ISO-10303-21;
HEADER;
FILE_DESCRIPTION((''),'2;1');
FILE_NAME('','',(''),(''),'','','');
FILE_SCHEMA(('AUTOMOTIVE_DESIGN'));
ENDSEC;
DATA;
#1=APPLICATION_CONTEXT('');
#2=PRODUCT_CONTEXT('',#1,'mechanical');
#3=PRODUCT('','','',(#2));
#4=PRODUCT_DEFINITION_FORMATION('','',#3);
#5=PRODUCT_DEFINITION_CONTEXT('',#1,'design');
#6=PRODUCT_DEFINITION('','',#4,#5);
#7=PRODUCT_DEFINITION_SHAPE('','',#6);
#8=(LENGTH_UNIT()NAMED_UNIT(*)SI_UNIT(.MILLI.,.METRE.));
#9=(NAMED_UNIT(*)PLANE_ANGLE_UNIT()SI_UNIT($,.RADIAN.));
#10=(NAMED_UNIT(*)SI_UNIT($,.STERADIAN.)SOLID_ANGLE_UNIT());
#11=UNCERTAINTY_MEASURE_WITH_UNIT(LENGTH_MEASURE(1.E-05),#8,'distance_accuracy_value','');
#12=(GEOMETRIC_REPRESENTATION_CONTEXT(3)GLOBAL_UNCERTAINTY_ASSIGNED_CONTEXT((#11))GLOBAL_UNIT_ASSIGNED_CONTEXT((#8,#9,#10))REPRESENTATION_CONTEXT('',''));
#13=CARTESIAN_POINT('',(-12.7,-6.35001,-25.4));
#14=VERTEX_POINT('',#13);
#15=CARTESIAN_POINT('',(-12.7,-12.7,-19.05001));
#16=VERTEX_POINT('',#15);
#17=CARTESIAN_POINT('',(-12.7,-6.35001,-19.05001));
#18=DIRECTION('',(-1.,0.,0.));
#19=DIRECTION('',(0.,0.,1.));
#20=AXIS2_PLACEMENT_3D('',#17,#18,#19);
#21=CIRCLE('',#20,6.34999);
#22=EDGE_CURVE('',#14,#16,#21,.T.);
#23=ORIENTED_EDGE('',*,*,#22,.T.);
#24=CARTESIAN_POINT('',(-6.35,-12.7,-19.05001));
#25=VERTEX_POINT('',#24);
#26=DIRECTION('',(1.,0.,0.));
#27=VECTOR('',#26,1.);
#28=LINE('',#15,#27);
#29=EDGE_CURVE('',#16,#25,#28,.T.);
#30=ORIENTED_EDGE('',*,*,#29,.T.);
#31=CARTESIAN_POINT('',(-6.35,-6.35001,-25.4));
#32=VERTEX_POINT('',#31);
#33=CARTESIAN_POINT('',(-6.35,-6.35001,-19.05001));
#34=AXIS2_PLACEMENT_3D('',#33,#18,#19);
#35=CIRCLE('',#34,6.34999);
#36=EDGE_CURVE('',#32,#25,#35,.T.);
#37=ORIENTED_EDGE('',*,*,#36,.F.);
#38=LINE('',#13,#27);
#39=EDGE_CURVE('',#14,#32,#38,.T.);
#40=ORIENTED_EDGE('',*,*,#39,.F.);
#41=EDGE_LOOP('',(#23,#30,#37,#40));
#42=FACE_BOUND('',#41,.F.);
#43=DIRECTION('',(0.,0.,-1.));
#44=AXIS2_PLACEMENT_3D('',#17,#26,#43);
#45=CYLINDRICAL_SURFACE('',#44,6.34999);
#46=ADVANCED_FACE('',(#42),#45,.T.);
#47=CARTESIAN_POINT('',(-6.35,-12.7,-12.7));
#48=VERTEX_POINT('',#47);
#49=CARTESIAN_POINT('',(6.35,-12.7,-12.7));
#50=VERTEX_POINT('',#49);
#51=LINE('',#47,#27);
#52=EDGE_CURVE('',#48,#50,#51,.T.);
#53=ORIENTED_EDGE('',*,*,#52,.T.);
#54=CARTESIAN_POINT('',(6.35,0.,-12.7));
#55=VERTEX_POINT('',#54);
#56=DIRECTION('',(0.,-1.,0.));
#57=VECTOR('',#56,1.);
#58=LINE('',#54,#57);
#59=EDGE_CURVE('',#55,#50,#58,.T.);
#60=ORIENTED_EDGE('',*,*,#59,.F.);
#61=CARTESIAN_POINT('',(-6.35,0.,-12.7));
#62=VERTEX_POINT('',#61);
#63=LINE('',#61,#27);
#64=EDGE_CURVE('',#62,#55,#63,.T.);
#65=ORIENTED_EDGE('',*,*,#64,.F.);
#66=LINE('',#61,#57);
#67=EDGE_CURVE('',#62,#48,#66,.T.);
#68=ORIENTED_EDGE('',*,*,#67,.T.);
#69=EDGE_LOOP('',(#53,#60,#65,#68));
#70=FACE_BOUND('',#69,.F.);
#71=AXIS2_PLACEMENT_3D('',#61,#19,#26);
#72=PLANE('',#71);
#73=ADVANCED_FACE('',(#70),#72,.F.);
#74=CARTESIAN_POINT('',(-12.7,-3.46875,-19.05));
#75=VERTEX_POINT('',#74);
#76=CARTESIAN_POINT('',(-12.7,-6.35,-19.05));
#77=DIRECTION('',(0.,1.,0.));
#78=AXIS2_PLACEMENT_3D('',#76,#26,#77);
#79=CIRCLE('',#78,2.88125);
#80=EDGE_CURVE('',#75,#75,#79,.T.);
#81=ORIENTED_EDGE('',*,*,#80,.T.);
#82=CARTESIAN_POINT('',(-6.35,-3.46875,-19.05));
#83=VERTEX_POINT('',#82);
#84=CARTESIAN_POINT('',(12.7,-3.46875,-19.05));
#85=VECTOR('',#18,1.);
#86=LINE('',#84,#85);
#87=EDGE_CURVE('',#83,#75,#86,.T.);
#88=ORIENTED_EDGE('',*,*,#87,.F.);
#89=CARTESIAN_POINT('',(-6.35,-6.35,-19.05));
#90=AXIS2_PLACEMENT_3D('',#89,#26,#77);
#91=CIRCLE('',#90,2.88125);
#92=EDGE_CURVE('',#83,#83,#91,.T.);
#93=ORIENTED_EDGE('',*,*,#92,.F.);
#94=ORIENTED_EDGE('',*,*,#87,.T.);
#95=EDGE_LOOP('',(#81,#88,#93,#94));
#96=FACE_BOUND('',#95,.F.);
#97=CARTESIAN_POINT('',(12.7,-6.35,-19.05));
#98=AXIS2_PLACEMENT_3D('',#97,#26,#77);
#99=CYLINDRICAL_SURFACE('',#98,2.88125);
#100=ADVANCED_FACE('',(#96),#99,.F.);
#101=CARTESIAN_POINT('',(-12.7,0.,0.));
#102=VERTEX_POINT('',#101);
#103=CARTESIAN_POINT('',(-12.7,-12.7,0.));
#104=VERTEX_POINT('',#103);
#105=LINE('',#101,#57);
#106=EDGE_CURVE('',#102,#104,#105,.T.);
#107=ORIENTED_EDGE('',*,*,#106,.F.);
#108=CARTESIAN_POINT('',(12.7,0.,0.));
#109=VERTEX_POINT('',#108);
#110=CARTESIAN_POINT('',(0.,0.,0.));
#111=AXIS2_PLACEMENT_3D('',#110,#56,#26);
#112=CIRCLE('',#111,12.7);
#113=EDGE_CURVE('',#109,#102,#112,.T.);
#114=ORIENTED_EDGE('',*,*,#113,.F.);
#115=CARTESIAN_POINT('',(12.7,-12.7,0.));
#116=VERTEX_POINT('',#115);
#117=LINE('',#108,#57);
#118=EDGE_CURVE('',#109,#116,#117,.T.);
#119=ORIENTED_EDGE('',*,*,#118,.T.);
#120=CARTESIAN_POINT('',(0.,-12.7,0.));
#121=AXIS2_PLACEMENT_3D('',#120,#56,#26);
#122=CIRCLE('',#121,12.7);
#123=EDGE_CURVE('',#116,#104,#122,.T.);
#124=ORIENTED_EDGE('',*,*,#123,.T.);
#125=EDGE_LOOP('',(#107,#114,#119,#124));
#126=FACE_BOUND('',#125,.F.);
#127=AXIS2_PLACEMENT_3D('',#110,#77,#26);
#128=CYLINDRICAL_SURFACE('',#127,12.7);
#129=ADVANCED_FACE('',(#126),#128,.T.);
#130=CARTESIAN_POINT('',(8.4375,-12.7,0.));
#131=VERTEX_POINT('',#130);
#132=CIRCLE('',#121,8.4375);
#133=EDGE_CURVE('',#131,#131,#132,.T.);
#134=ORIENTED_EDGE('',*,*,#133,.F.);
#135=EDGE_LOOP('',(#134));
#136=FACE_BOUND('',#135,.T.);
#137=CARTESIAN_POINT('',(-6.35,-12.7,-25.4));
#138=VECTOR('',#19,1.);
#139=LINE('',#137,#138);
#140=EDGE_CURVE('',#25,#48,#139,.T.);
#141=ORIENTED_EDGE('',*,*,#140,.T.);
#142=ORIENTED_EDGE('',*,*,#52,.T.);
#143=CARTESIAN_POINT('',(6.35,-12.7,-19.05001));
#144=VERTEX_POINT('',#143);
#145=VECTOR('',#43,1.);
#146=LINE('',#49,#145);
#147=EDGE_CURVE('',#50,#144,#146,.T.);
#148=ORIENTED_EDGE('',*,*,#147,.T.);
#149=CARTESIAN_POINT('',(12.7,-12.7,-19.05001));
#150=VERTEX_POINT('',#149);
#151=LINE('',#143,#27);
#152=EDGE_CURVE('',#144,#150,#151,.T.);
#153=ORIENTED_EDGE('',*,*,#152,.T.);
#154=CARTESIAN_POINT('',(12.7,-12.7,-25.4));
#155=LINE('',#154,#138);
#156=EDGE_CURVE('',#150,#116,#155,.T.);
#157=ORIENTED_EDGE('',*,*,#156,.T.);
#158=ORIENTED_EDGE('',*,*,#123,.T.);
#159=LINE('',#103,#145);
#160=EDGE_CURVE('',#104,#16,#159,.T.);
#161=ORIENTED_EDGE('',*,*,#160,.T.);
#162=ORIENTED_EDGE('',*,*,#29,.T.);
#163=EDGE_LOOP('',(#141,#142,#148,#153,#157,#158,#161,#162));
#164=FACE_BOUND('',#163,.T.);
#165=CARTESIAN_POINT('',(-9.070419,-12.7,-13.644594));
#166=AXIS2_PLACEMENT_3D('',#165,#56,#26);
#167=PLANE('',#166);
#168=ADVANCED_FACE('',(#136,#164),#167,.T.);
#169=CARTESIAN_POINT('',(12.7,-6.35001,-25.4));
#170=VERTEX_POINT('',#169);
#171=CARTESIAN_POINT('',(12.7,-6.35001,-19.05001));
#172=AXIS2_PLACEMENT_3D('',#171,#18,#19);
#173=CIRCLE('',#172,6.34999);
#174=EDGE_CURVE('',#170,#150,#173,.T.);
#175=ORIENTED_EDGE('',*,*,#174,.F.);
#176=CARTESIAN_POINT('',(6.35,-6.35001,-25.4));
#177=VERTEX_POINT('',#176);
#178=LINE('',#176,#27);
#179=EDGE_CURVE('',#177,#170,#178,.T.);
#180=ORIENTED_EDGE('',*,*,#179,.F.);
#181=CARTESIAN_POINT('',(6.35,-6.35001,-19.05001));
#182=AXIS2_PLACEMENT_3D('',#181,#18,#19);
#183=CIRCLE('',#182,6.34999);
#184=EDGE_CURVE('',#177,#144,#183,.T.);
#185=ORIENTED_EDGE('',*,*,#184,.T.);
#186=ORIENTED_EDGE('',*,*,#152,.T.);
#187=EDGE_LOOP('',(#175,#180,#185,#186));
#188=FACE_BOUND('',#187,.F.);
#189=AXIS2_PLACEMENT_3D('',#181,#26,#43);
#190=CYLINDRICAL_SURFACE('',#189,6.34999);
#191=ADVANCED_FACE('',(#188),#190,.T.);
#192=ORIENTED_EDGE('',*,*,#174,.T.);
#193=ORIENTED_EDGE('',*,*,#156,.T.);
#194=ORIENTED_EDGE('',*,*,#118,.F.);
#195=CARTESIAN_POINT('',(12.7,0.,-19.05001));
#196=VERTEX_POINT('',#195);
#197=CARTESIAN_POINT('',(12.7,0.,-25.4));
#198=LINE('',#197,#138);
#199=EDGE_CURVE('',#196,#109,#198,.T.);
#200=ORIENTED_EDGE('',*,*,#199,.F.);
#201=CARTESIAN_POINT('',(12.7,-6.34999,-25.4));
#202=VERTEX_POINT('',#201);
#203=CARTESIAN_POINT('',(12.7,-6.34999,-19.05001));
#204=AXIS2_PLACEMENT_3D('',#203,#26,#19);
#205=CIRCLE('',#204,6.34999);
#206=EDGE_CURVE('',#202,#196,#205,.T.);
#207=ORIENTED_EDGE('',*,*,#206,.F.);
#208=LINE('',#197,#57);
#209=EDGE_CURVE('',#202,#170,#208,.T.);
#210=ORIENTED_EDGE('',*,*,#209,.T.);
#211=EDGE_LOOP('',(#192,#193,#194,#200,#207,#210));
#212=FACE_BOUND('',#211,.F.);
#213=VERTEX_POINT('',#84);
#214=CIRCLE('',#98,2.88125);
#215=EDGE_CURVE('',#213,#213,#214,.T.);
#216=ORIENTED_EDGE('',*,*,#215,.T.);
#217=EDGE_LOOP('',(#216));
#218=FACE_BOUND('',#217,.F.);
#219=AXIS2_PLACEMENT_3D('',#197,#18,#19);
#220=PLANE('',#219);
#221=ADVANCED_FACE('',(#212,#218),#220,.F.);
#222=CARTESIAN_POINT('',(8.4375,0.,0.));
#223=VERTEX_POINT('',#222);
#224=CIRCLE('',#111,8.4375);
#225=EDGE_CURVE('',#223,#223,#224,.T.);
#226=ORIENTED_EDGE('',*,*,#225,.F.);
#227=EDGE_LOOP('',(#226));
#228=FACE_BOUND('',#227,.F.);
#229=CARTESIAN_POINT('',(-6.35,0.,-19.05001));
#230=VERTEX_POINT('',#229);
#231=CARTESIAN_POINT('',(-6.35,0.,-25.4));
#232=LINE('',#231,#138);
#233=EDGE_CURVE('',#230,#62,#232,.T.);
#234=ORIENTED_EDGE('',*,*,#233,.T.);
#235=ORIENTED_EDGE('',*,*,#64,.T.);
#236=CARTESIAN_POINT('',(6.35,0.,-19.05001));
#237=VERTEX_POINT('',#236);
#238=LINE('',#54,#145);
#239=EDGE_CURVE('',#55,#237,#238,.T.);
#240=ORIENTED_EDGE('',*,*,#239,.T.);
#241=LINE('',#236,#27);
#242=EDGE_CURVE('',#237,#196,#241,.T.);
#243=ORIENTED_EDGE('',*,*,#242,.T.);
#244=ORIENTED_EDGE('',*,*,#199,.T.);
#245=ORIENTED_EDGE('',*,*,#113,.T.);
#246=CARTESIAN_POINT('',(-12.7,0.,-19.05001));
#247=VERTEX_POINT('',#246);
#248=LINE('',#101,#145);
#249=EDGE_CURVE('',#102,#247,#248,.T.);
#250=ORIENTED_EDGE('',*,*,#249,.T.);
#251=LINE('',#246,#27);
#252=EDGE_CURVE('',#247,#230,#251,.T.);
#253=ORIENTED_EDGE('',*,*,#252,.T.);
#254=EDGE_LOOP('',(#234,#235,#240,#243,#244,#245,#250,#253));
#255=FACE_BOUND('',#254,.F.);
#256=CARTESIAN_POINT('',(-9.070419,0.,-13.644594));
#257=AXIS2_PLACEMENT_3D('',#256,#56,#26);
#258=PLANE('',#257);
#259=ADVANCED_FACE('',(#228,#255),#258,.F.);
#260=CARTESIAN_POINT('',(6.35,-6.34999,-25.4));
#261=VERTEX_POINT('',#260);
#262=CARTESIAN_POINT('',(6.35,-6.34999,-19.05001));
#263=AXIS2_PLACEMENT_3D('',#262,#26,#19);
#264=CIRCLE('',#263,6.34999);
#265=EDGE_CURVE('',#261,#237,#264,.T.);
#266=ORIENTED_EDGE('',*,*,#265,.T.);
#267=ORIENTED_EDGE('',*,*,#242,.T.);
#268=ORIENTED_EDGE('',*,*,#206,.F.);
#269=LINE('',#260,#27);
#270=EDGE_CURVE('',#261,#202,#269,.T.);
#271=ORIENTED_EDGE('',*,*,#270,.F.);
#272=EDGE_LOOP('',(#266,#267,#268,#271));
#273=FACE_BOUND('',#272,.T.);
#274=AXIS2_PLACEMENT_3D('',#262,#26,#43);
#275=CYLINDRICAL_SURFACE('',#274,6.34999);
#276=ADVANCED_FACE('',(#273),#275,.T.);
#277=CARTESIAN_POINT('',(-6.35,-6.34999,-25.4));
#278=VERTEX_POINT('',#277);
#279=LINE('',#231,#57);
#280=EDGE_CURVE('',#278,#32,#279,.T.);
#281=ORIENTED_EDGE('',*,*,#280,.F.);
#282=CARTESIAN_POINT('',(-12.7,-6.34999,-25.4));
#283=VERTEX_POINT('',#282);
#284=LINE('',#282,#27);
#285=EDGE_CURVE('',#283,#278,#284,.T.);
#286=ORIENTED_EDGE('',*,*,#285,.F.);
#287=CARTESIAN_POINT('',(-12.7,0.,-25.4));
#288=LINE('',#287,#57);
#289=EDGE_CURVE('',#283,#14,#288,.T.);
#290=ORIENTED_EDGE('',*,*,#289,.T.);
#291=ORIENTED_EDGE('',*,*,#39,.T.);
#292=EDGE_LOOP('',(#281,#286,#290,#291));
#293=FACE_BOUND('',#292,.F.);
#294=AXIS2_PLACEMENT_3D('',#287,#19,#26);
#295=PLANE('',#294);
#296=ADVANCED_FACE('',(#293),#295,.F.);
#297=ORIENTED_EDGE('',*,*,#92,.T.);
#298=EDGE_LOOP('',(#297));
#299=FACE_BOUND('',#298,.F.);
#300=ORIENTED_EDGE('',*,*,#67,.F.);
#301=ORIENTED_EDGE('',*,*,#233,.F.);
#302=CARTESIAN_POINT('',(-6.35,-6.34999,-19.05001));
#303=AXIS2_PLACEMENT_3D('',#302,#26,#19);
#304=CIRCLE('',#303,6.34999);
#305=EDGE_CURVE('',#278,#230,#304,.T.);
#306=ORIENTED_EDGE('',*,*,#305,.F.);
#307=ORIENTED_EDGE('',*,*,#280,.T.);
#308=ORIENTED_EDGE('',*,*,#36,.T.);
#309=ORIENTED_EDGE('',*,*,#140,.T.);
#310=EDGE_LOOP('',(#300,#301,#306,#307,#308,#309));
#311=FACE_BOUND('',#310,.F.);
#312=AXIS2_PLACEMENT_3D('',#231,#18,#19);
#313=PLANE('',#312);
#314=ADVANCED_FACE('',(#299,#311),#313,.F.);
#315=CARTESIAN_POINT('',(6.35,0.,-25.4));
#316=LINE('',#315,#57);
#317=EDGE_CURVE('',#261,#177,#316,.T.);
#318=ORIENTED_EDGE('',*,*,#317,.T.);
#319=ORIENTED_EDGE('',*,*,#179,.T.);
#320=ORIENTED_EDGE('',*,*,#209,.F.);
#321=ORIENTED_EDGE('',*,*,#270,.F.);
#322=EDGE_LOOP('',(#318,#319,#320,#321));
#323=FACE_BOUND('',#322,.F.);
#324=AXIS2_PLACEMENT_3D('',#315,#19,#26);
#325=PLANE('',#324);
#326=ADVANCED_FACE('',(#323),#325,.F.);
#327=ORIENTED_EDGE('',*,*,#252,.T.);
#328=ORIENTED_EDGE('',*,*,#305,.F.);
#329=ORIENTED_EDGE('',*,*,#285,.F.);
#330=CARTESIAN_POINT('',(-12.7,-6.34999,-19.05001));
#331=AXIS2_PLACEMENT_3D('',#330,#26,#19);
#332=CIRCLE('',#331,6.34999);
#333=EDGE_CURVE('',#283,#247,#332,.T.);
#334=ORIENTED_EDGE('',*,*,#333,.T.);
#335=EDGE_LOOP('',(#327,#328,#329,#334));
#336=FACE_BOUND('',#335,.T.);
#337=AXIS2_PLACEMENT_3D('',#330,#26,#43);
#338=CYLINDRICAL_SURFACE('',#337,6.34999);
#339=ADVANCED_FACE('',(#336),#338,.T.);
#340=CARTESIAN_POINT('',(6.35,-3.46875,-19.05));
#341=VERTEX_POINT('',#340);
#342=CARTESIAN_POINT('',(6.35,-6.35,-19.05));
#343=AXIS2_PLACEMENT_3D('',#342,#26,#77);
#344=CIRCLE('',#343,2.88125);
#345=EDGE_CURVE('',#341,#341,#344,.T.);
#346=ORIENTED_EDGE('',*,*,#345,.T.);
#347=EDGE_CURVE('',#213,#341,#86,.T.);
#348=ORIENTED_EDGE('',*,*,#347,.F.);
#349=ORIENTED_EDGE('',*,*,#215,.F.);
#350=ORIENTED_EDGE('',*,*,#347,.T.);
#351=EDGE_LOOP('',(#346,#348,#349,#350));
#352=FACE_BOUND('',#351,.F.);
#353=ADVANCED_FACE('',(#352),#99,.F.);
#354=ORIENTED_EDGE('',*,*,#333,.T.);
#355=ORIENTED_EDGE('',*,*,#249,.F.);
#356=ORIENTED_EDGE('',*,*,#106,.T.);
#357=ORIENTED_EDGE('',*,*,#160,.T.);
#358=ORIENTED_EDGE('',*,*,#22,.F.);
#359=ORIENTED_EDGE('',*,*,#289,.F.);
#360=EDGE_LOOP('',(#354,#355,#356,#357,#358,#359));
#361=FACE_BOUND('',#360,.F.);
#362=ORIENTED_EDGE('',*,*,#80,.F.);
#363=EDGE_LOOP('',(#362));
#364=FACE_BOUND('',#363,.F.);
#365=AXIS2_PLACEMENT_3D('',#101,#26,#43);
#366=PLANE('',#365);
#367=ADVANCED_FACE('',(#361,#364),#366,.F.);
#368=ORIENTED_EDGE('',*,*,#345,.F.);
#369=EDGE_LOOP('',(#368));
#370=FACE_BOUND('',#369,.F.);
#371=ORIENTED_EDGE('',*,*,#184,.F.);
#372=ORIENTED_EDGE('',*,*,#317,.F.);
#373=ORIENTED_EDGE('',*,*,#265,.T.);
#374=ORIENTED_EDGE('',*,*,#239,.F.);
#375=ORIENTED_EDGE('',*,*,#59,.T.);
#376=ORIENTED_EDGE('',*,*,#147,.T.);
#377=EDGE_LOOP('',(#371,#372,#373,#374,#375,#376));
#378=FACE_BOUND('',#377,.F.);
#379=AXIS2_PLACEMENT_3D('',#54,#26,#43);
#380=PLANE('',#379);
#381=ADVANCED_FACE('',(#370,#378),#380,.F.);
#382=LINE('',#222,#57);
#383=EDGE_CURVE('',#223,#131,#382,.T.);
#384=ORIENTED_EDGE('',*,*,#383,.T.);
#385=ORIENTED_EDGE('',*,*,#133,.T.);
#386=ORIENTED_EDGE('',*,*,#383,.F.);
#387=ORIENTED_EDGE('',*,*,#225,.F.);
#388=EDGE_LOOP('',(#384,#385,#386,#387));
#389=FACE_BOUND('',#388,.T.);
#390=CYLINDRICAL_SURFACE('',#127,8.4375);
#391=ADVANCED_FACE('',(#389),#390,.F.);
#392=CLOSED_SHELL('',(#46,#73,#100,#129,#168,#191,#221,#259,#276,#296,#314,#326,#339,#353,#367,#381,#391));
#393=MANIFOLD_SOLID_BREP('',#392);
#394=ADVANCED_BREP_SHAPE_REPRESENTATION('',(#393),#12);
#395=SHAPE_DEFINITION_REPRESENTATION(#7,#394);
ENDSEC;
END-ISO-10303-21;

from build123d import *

# Parameters (mm, degrees)
F0_R     = 8.4375
F1_DEPTH = 12.7
F2_R     = 6.34999
F3_R     = 2.88125
F4_DEPTH = 25.401


# Not quite as in the source:
# - a fillet or chamfer is up to 0.001 mm smaller than in the source, because OpenCascade refuses the exact size


with BuildPart() as f1:
    # F0 (on Front) → F1 (new body)
    with BuildSketch(Plane.XZ):
        with BuildLine():
            ThreePointArc((0, -12.7), (-8.9802561211, -8.9802561211), (-12.7, 0))
            Line((-12.7, 0), (-12.7, -25.4))
            Line((-12.7, -25.4), (-6.35, -25.4))
            Line((-6.35, -25.4), (-6.35, -12.7))
            Line((-6.35, -12.7), (0, -12.7))
        make_face()
        with BuildLine():
            Line((12.7, -25.4), (12.7, 0))
            ThreePointArc((12.7, 0), (8.9802561211, -8.9802561211), (0, -12.7))
            Line((0, -12.7), (6.35, -12.7))
            Line((6.35, -12.7), (6.35, -25.4))
            Line((6.35, -25.4), (12.7, -25.4))
        make_face()
        with BuildLine():
            ThreePointArc((0, -12.7), (8.9802561211, -8.9802561211), (12.7, 0))
            ThreePointArc((12.7, 0), (0, 12.7), (-12.7, 0))
            ThreePointArc((-12.7, 0), (-8.9802561211, -8.9802561211), (0, -12.7))
        make_face()
        Circle(F0_R, mode=Mode.SUBTRACT)
    extrude(amount=F1_DEPTH)

    # F2 (radius 6.35 in the source; OpenCascade refuses exactly that, so slightly less here)
    f2_edges = [f1.edges().sort_by_distance(p)[0] for p in [
        (-9.525, -12.7, -25.4),
        (-9.525, 0, -25.4),
        (9.525, -12.7, -25.4),
        (9.525, 0, -25.4),
    ]]
    fillet(f2_edges, radius=F2_R)

    # F3 (on face) → F4 (cut, through all)
    with BuildSketch(Plane.YZ.offset(12.7)):
        with Locations((-6.35, -19.05)):
            Circle(F3_R)
    extrude(amount=-F4_DEPTH, mode=Mode.SUBTRACT)


solid = f1.part
